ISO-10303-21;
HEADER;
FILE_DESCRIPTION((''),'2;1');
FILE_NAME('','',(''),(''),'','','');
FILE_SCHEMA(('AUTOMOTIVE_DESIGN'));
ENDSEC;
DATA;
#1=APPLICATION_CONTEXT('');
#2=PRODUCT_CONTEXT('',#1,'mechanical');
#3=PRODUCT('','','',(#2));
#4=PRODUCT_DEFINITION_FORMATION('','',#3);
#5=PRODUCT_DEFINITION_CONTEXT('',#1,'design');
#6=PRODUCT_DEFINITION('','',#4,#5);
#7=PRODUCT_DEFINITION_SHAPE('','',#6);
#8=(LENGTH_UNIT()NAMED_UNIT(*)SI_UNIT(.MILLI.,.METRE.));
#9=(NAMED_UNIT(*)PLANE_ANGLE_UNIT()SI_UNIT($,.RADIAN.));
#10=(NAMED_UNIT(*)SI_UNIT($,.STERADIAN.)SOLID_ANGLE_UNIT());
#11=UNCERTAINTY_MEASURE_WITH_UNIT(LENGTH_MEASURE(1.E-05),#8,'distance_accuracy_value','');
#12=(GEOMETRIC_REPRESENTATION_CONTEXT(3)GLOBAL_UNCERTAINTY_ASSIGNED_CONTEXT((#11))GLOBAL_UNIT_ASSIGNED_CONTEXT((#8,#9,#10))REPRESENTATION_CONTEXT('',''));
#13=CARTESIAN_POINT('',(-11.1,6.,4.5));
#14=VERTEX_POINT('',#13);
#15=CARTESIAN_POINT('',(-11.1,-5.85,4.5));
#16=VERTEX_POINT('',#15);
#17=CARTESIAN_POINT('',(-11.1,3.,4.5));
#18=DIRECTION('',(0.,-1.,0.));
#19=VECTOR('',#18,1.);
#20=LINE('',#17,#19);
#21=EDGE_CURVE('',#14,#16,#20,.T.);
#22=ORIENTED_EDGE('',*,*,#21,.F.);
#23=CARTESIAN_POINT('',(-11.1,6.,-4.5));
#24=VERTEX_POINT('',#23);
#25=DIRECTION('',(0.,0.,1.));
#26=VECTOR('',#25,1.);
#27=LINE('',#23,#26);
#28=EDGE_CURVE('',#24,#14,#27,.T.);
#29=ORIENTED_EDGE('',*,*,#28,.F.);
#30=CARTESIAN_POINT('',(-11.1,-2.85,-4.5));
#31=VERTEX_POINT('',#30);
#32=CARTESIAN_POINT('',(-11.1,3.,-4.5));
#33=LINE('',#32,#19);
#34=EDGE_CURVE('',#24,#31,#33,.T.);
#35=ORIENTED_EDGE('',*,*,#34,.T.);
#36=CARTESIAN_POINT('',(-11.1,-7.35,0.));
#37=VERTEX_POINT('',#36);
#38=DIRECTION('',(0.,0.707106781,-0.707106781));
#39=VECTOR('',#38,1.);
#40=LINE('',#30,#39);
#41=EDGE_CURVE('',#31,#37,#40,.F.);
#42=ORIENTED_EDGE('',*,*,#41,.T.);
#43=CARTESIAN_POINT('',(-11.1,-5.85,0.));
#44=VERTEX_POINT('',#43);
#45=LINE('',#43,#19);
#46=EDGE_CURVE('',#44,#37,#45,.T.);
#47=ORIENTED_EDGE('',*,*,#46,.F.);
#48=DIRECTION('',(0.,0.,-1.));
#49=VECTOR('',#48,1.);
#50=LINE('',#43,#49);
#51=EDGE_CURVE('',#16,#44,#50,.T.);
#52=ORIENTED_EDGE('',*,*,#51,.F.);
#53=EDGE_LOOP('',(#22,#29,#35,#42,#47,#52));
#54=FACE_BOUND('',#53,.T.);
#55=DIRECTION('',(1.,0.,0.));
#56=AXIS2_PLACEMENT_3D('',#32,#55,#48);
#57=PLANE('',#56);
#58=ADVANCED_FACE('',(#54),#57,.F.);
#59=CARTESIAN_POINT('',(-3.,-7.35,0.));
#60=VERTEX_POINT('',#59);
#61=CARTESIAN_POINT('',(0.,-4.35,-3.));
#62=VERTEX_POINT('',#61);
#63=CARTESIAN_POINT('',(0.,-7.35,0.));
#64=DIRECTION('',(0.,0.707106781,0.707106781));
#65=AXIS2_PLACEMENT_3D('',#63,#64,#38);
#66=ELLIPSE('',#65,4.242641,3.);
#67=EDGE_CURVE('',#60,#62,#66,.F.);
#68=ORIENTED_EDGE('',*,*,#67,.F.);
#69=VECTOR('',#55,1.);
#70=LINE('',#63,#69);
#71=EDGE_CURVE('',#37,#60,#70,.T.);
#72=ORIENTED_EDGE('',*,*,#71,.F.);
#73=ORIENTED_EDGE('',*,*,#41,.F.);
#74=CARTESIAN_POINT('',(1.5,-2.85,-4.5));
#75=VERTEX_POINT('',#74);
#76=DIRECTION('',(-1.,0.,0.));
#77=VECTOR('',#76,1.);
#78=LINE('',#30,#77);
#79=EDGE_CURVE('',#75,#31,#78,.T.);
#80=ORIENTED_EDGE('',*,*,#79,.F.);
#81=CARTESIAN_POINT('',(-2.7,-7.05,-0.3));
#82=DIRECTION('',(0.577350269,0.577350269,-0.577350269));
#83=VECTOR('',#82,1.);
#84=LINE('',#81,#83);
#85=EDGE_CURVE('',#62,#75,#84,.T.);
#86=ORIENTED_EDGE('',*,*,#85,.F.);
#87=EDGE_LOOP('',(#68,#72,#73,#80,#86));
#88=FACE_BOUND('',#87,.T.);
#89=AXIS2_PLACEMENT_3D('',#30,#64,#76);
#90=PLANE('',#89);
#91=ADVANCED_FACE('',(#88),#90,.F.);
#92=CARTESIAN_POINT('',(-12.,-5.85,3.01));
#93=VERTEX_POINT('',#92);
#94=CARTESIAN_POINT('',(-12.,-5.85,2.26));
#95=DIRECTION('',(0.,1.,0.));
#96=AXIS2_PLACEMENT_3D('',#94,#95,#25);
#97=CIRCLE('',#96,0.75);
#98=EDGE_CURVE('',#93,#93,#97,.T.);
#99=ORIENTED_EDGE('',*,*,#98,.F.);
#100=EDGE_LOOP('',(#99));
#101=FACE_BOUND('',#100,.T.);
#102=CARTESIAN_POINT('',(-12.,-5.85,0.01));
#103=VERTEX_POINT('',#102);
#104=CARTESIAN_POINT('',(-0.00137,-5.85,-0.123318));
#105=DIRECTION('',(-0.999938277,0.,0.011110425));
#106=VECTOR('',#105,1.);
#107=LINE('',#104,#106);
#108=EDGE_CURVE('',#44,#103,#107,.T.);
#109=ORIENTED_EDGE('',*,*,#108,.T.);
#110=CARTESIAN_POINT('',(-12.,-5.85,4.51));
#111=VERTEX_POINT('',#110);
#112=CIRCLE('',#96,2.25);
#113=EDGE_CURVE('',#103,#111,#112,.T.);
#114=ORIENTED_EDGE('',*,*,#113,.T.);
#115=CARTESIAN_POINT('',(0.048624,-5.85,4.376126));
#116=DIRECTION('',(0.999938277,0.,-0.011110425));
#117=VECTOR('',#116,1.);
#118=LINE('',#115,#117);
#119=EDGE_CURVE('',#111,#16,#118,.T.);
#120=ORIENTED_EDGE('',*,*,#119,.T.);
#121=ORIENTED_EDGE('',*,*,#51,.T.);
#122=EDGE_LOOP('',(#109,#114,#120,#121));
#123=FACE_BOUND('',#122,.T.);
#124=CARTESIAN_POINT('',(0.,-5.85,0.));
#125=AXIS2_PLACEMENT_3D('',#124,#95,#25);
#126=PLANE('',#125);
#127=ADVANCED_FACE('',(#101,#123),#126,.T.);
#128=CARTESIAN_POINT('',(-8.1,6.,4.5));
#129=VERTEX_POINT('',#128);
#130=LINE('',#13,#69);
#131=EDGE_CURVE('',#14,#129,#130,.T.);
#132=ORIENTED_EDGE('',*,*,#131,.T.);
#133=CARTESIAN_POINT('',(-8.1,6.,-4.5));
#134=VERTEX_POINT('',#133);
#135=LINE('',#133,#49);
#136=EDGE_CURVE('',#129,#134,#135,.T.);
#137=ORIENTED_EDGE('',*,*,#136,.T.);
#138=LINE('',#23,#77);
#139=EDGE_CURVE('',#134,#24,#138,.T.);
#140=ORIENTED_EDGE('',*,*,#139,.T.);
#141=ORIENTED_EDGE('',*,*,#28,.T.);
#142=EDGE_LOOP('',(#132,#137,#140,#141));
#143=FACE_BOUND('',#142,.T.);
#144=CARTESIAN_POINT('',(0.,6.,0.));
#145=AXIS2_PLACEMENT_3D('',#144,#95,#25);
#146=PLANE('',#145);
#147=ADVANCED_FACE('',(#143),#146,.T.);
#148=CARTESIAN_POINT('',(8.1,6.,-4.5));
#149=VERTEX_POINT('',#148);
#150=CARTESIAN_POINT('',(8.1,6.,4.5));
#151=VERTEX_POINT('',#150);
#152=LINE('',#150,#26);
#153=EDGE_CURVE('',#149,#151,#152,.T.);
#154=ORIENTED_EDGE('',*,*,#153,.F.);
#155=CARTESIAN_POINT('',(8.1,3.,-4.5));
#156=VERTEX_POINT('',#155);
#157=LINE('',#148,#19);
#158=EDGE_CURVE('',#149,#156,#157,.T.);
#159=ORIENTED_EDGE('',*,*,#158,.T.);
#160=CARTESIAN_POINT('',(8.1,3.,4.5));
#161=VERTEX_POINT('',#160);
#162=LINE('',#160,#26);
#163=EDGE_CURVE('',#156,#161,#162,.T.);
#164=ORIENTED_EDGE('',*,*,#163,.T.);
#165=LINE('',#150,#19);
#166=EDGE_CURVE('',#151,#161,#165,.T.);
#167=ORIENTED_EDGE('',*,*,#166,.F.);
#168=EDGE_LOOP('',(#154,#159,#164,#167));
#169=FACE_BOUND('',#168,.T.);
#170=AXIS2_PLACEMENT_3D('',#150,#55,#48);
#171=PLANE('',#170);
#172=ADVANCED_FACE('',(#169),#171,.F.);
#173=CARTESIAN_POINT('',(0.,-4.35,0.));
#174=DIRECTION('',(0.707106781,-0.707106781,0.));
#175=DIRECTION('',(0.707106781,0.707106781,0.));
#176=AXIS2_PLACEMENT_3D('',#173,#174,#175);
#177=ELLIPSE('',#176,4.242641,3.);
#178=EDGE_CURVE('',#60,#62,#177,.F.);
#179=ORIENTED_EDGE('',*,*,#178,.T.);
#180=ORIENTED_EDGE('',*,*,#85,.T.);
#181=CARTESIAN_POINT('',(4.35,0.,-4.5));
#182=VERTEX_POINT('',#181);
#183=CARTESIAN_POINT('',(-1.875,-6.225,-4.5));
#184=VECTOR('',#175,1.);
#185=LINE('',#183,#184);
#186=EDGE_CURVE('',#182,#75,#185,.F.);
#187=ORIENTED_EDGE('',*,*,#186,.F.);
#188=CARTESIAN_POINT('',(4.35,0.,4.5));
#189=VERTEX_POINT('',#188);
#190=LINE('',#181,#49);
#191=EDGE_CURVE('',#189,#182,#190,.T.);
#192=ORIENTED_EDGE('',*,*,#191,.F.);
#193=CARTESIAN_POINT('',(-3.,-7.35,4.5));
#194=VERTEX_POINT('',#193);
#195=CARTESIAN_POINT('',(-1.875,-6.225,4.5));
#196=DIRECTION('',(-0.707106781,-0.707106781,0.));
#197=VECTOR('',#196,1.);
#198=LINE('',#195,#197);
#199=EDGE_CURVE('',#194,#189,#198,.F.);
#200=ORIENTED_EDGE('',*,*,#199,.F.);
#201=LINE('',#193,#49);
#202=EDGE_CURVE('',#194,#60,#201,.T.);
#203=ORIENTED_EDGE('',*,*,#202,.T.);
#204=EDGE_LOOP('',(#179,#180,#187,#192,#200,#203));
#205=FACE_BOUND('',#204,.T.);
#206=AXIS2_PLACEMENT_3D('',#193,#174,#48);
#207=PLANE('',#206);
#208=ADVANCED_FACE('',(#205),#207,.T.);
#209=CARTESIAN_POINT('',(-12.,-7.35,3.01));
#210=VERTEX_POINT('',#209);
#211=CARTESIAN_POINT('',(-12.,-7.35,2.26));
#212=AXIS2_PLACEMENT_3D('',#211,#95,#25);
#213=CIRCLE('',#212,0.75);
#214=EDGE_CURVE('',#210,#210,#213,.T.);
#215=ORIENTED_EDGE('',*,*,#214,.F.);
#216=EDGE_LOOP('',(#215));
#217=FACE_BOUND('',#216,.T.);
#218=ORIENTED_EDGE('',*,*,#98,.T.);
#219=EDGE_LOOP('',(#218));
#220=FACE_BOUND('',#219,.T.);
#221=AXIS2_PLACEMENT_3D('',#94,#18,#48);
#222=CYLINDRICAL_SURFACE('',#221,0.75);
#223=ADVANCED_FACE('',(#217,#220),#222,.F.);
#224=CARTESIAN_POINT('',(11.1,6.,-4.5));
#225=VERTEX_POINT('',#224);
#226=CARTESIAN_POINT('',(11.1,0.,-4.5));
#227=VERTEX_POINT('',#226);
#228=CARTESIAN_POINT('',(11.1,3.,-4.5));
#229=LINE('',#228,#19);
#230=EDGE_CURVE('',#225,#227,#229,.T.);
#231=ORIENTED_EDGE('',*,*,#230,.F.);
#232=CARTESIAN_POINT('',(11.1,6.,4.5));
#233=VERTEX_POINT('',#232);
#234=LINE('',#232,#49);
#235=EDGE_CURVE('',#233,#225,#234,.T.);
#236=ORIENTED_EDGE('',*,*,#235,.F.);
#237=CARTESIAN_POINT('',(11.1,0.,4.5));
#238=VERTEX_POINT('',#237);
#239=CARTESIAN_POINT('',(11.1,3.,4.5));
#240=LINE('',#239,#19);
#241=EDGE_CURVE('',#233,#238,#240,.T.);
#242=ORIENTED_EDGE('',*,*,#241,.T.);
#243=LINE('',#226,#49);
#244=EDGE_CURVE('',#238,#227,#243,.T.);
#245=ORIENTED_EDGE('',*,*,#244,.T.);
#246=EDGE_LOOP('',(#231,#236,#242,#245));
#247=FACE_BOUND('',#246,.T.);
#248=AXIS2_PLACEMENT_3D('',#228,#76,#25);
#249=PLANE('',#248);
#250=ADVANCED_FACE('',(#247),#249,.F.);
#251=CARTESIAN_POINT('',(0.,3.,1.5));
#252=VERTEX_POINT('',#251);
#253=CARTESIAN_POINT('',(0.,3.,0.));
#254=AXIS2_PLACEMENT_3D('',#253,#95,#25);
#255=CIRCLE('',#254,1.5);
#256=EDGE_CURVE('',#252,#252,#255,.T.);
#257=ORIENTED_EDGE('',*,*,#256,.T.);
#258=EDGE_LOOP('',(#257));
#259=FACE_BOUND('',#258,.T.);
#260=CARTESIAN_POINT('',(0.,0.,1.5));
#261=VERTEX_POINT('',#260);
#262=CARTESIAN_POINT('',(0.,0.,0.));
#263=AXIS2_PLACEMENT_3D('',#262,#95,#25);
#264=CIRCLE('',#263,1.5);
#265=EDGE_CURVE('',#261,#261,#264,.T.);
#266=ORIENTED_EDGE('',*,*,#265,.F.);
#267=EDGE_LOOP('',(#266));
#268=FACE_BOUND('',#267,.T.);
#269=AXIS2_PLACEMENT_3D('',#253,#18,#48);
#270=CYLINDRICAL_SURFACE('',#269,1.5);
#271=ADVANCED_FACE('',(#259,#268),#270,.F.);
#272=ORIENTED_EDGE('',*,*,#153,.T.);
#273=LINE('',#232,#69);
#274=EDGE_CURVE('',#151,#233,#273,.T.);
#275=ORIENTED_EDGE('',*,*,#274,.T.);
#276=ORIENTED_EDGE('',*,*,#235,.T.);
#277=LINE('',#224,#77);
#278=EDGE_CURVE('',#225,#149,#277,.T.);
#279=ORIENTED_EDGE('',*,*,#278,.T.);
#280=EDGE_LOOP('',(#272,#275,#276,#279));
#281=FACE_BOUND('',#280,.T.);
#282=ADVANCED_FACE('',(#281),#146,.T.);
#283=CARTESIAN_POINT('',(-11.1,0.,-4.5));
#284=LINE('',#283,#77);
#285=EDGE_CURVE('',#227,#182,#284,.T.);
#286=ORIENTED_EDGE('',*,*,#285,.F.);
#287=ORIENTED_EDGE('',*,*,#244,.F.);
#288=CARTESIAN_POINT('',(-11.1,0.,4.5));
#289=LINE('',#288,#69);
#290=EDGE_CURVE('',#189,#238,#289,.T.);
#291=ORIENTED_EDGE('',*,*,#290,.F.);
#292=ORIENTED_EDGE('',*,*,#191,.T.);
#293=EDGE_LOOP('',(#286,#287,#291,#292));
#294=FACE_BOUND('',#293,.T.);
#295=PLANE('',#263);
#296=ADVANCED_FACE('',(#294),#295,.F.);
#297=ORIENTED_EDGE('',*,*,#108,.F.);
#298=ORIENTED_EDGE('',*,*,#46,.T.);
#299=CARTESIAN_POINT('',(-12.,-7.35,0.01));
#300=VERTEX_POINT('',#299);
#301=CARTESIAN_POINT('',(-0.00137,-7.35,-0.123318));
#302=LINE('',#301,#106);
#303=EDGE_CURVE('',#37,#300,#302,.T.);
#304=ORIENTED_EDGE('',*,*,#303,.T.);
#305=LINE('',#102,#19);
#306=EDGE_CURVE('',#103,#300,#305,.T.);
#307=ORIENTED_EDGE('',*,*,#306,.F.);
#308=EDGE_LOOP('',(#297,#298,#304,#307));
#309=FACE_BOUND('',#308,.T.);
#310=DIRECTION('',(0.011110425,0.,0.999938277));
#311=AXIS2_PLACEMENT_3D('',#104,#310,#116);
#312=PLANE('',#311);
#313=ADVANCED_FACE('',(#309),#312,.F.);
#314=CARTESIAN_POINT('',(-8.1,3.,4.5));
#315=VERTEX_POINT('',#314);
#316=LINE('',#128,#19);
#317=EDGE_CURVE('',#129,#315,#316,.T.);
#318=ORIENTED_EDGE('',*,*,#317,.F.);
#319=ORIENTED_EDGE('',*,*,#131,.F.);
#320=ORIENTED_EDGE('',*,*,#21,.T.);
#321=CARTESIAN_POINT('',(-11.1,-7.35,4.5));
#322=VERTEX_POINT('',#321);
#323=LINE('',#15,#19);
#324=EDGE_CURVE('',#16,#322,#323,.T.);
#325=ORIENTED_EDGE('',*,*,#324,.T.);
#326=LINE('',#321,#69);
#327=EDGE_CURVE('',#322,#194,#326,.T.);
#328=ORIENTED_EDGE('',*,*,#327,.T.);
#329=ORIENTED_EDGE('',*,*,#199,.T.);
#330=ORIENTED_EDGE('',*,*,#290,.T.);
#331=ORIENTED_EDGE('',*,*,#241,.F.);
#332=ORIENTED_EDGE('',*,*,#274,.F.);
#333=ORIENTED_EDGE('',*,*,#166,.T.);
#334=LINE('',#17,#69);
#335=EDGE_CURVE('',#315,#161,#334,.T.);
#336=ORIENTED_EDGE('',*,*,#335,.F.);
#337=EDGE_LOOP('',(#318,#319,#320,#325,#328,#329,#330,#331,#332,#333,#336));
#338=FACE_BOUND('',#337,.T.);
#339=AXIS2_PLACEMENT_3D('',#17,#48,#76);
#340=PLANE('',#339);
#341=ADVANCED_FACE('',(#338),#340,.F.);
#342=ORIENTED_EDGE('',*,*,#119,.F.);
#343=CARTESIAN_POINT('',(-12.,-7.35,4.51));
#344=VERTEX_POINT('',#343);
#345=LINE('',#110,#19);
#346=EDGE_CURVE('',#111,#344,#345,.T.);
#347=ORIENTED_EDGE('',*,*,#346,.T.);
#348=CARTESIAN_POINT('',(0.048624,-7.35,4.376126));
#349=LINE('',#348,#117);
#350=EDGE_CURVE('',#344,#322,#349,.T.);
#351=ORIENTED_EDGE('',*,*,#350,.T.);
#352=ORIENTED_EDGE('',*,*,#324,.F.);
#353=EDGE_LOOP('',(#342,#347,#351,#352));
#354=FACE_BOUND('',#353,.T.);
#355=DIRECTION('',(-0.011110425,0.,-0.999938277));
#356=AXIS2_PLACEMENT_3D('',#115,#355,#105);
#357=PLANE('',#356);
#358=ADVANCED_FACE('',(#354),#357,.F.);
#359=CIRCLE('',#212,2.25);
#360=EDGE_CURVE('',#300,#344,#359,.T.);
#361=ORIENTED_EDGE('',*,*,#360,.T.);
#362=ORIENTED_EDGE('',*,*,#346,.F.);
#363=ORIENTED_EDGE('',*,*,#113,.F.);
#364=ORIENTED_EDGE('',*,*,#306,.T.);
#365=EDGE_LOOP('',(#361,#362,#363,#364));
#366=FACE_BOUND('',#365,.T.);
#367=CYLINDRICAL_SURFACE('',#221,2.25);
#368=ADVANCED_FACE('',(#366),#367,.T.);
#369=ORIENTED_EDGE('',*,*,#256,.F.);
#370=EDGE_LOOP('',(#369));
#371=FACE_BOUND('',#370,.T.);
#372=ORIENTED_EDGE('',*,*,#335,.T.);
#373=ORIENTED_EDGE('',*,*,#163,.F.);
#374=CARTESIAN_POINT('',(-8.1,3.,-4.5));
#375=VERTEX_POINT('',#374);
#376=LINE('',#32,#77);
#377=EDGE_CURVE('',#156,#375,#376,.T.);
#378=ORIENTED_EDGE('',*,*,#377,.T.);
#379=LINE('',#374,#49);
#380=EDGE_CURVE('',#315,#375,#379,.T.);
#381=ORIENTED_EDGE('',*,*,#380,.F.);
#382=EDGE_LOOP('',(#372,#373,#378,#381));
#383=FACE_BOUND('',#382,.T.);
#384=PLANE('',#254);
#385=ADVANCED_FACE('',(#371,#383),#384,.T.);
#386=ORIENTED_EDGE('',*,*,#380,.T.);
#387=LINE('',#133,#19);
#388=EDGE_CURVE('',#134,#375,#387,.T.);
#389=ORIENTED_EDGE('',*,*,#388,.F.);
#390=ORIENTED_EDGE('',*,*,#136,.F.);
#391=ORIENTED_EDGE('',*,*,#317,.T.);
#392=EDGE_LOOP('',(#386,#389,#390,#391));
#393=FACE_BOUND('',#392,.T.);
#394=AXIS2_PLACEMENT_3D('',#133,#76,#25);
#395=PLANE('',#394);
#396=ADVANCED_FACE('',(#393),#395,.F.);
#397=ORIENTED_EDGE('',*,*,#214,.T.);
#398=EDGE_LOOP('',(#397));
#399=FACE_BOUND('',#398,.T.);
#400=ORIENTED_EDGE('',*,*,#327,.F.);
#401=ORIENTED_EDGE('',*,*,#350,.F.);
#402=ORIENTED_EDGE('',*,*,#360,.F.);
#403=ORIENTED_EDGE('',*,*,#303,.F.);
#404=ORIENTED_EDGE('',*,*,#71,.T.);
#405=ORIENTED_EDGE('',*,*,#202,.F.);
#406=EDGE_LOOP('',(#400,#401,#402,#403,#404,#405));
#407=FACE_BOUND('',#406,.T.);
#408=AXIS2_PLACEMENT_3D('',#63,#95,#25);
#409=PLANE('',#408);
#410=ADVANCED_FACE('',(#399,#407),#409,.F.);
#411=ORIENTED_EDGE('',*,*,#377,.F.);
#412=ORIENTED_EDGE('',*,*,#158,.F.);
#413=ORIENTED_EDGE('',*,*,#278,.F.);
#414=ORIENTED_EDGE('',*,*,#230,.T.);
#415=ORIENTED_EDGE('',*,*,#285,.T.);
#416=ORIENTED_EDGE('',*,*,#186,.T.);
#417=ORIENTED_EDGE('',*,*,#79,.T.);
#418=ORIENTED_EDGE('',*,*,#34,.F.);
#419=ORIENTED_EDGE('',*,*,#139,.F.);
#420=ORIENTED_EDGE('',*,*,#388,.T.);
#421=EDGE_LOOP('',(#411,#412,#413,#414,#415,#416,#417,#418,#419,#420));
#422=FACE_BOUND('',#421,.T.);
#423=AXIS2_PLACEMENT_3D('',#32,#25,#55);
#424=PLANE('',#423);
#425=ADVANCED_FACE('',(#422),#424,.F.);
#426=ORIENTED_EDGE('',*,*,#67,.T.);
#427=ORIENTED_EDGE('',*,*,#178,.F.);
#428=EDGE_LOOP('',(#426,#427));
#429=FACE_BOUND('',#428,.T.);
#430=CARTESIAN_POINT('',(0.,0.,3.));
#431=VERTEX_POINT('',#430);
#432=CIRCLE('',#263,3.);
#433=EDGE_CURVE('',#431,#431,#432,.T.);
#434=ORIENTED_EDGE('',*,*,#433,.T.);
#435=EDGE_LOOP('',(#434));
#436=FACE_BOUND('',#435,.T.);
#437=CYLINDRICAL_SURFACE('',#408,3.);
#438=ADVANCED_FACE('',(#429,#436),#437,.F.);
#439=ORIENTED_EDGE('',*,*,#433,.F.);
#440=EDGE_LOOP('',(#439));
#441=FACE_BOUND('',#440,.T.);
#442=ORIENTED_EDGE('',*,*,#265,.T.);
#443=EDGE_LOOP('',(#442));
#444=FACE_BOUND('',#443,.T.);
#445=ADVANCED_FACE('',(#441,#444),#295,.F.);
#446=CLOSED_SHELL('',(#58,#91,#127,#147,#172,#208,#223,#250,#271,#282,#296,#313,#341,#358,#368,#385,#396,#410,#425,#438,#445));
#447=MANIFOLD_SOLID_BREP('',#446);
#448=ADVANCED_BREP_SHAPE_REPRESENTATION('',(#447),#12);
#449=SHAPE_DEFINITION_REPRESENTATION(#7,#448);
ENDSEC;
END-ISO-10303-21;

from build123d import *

# Parameters (mm, degrees)
SKETCH1_W               = 22.2
SKETCH1_H               = 9
SKETCH1_R               = 1.5
BOSS_EXTRUDE1_DEPTH     = 3
SKETCH2_W               = 3
SKETCH2_H               = 9
BOSS_EXTRUDE2_DEPTH     = 3
BOSS_EXTRUDE3_START     = -10.35
BOSS_EXTRUDE3_OUTLINE_R = 0.75
BOSS_EXTRUDE3_DEPTH     = 1.5
SKETCH4_W               = 8.1
SKETCH4_H               = 9
BOSS_EXTRUDE4_DEPTH     = 7.35
CHAMFER1_SIZE           = 7.35
CHAMFER2_SIZE           = 4.5
CUT_EXTRUDE1_START      = -3
SKETCH5_R               = 3
CUT_EXTRUDE1_DEPTH      = 16.180349282


# Read off the part's stored shape, not the designer's step: Boss-Extrude3
with BuildPart() as part:
    # Sketch1 → Boss-Extrude1 (new body)
    with BuildSketch(Plane(origin=(0, 0, 0), x_dir=(1, 0, 0), z_dir=(0, 1, 0))):
        Rectangle(SKETCH1_W, SKETCH1_H)
        with Locations(Location((0, 0, 0), (0, 0, 270))):
            Circle(SKETCH1_R, mode=Mode.SUBTRACT)
    extrude(amount=BOSS_EXTRUDE1_DEPTH)

    # Sketch2 → Boss-Extrude2 (add)
    with BuildSketch(Plane(origin=(0, 3, 0), x_dir=(1, 0, 0), z_dir=(0, 1, 0))):
        with Locations((-9.6, 0)):
            Rectangle(SKETCH2_W, SKETCH2_H)
        with Locations((9.6, 0)):
            Rectangle(SKETCH2_W, SKETCH2_H)
    extrude(amount=BOSS_EXTRUDE2_DEPTH)



with BuildPart() as body_2:
    # Boss-Extrude3 outline → Boss-Extrude3 (new body)
    with BuildSketch(Plane(origin=(0, 3, 0), x_dir=(1, 0, 0), z_dir=(0, 1, 0)).offset(BOSS_EXTRUDE3_START)):
        with BuildLine():
            Line((-12, -4.51), (-11.1, -4.5))
            Line((-11.1, -4.5), (-11.1, 0))
            Line((-11.1, 0), (-12, -0.01))
            ThreePointArc((-12, -0.01), (-14.25, -2.26), (-12, -4.51))
        make_face()
        with Locations((-12, -2.26)):
            Circle(BOSS_EXTRUDE3_OUTLINE_R, mode=Mode.SUBTRACT)
    extrude(amount=BOSS_EXTRUDE3_DEPTH)


with BuildPart() as part_1:
    add(part.part)

    add(body_2.part)  # Boss-Extrude4 merges body 2
    # Sketch4 → Boss-Extrude4 (add)
    with BuildSketch(Plane.XZ):
        with Locations((-7.05, 0)):
            Rectangle(SKETCH4_W, SKETCH4_H)
    extrude(amount=BOSS_EXTRUDE4_DEPTH)

    # Chamfer1
    # the kernel refuses this chamfer: 7.35 mm, written as the material it adds along each edge
    with BuildSketch(Plane(origin=(-3, 0, 4.5), x_dir=(0.9996219169112966, 0.027495876610586372, 0), z_dir=(0, 0, -1))) as chamfer1_piece_1_section:
        Polygon((CHAMFER1_SIZE * 0.999621916911, CHAMFER1_SIZE * 0.0274958766106), (-CHAMFER1_SIZE * 0.0274958766106, CHAMFER1_SIZE * 0.999621916911), (0, 0), align=None)
    chamfer1_piece_1 = extrude(amount=9, mode=Mode.PRIVATE)
    chamfer1_piece_1 = chamfer1_piece_1 - Plane(origin=(0, -1.008100378, 0), x_dir=(0, 0, 1), z_dir=(0, -1, 0)) * Cylinder(1.5, 48, mode=Mode.PRIVATE)
    chamfer1_piece_1 = split(chamfer1_piece_1, bisect_by=Plane(origin=(3.254582701, -7.35, -3), z_dir=(0, 1, 0)), keep=Keep.TOP, mode=Mode.PRIVATE)
    add(chamfer1_piece_1)

    # Chamfer2
    chamfer2_edges = [part_1.edges().sort_by_distance(p)[0] for p in [
        (-7.05, -7.35, -4.5),
    ]]
    chamfer(chamfer2_edges, length=CHAMFER2_SIZE)

    # Sketch5 → Cut-Extrude1 (cut, through all)
    with BuildSketch(Plane(origin=(0, 3, 0), x_dir=(1, 0, 0), z_dir=(0, 1, 0)).offset(CUT_EXTRUDE1_START)):
        with Locations(Location((0, 0, 0), (0, 0, 270))):
            Circle(SKETCH5_R)
    extrude(amount=-CUT_EXTRUDE1_DEPTH, mode=Mode.SUBTRACT)


solid = part_1.part
